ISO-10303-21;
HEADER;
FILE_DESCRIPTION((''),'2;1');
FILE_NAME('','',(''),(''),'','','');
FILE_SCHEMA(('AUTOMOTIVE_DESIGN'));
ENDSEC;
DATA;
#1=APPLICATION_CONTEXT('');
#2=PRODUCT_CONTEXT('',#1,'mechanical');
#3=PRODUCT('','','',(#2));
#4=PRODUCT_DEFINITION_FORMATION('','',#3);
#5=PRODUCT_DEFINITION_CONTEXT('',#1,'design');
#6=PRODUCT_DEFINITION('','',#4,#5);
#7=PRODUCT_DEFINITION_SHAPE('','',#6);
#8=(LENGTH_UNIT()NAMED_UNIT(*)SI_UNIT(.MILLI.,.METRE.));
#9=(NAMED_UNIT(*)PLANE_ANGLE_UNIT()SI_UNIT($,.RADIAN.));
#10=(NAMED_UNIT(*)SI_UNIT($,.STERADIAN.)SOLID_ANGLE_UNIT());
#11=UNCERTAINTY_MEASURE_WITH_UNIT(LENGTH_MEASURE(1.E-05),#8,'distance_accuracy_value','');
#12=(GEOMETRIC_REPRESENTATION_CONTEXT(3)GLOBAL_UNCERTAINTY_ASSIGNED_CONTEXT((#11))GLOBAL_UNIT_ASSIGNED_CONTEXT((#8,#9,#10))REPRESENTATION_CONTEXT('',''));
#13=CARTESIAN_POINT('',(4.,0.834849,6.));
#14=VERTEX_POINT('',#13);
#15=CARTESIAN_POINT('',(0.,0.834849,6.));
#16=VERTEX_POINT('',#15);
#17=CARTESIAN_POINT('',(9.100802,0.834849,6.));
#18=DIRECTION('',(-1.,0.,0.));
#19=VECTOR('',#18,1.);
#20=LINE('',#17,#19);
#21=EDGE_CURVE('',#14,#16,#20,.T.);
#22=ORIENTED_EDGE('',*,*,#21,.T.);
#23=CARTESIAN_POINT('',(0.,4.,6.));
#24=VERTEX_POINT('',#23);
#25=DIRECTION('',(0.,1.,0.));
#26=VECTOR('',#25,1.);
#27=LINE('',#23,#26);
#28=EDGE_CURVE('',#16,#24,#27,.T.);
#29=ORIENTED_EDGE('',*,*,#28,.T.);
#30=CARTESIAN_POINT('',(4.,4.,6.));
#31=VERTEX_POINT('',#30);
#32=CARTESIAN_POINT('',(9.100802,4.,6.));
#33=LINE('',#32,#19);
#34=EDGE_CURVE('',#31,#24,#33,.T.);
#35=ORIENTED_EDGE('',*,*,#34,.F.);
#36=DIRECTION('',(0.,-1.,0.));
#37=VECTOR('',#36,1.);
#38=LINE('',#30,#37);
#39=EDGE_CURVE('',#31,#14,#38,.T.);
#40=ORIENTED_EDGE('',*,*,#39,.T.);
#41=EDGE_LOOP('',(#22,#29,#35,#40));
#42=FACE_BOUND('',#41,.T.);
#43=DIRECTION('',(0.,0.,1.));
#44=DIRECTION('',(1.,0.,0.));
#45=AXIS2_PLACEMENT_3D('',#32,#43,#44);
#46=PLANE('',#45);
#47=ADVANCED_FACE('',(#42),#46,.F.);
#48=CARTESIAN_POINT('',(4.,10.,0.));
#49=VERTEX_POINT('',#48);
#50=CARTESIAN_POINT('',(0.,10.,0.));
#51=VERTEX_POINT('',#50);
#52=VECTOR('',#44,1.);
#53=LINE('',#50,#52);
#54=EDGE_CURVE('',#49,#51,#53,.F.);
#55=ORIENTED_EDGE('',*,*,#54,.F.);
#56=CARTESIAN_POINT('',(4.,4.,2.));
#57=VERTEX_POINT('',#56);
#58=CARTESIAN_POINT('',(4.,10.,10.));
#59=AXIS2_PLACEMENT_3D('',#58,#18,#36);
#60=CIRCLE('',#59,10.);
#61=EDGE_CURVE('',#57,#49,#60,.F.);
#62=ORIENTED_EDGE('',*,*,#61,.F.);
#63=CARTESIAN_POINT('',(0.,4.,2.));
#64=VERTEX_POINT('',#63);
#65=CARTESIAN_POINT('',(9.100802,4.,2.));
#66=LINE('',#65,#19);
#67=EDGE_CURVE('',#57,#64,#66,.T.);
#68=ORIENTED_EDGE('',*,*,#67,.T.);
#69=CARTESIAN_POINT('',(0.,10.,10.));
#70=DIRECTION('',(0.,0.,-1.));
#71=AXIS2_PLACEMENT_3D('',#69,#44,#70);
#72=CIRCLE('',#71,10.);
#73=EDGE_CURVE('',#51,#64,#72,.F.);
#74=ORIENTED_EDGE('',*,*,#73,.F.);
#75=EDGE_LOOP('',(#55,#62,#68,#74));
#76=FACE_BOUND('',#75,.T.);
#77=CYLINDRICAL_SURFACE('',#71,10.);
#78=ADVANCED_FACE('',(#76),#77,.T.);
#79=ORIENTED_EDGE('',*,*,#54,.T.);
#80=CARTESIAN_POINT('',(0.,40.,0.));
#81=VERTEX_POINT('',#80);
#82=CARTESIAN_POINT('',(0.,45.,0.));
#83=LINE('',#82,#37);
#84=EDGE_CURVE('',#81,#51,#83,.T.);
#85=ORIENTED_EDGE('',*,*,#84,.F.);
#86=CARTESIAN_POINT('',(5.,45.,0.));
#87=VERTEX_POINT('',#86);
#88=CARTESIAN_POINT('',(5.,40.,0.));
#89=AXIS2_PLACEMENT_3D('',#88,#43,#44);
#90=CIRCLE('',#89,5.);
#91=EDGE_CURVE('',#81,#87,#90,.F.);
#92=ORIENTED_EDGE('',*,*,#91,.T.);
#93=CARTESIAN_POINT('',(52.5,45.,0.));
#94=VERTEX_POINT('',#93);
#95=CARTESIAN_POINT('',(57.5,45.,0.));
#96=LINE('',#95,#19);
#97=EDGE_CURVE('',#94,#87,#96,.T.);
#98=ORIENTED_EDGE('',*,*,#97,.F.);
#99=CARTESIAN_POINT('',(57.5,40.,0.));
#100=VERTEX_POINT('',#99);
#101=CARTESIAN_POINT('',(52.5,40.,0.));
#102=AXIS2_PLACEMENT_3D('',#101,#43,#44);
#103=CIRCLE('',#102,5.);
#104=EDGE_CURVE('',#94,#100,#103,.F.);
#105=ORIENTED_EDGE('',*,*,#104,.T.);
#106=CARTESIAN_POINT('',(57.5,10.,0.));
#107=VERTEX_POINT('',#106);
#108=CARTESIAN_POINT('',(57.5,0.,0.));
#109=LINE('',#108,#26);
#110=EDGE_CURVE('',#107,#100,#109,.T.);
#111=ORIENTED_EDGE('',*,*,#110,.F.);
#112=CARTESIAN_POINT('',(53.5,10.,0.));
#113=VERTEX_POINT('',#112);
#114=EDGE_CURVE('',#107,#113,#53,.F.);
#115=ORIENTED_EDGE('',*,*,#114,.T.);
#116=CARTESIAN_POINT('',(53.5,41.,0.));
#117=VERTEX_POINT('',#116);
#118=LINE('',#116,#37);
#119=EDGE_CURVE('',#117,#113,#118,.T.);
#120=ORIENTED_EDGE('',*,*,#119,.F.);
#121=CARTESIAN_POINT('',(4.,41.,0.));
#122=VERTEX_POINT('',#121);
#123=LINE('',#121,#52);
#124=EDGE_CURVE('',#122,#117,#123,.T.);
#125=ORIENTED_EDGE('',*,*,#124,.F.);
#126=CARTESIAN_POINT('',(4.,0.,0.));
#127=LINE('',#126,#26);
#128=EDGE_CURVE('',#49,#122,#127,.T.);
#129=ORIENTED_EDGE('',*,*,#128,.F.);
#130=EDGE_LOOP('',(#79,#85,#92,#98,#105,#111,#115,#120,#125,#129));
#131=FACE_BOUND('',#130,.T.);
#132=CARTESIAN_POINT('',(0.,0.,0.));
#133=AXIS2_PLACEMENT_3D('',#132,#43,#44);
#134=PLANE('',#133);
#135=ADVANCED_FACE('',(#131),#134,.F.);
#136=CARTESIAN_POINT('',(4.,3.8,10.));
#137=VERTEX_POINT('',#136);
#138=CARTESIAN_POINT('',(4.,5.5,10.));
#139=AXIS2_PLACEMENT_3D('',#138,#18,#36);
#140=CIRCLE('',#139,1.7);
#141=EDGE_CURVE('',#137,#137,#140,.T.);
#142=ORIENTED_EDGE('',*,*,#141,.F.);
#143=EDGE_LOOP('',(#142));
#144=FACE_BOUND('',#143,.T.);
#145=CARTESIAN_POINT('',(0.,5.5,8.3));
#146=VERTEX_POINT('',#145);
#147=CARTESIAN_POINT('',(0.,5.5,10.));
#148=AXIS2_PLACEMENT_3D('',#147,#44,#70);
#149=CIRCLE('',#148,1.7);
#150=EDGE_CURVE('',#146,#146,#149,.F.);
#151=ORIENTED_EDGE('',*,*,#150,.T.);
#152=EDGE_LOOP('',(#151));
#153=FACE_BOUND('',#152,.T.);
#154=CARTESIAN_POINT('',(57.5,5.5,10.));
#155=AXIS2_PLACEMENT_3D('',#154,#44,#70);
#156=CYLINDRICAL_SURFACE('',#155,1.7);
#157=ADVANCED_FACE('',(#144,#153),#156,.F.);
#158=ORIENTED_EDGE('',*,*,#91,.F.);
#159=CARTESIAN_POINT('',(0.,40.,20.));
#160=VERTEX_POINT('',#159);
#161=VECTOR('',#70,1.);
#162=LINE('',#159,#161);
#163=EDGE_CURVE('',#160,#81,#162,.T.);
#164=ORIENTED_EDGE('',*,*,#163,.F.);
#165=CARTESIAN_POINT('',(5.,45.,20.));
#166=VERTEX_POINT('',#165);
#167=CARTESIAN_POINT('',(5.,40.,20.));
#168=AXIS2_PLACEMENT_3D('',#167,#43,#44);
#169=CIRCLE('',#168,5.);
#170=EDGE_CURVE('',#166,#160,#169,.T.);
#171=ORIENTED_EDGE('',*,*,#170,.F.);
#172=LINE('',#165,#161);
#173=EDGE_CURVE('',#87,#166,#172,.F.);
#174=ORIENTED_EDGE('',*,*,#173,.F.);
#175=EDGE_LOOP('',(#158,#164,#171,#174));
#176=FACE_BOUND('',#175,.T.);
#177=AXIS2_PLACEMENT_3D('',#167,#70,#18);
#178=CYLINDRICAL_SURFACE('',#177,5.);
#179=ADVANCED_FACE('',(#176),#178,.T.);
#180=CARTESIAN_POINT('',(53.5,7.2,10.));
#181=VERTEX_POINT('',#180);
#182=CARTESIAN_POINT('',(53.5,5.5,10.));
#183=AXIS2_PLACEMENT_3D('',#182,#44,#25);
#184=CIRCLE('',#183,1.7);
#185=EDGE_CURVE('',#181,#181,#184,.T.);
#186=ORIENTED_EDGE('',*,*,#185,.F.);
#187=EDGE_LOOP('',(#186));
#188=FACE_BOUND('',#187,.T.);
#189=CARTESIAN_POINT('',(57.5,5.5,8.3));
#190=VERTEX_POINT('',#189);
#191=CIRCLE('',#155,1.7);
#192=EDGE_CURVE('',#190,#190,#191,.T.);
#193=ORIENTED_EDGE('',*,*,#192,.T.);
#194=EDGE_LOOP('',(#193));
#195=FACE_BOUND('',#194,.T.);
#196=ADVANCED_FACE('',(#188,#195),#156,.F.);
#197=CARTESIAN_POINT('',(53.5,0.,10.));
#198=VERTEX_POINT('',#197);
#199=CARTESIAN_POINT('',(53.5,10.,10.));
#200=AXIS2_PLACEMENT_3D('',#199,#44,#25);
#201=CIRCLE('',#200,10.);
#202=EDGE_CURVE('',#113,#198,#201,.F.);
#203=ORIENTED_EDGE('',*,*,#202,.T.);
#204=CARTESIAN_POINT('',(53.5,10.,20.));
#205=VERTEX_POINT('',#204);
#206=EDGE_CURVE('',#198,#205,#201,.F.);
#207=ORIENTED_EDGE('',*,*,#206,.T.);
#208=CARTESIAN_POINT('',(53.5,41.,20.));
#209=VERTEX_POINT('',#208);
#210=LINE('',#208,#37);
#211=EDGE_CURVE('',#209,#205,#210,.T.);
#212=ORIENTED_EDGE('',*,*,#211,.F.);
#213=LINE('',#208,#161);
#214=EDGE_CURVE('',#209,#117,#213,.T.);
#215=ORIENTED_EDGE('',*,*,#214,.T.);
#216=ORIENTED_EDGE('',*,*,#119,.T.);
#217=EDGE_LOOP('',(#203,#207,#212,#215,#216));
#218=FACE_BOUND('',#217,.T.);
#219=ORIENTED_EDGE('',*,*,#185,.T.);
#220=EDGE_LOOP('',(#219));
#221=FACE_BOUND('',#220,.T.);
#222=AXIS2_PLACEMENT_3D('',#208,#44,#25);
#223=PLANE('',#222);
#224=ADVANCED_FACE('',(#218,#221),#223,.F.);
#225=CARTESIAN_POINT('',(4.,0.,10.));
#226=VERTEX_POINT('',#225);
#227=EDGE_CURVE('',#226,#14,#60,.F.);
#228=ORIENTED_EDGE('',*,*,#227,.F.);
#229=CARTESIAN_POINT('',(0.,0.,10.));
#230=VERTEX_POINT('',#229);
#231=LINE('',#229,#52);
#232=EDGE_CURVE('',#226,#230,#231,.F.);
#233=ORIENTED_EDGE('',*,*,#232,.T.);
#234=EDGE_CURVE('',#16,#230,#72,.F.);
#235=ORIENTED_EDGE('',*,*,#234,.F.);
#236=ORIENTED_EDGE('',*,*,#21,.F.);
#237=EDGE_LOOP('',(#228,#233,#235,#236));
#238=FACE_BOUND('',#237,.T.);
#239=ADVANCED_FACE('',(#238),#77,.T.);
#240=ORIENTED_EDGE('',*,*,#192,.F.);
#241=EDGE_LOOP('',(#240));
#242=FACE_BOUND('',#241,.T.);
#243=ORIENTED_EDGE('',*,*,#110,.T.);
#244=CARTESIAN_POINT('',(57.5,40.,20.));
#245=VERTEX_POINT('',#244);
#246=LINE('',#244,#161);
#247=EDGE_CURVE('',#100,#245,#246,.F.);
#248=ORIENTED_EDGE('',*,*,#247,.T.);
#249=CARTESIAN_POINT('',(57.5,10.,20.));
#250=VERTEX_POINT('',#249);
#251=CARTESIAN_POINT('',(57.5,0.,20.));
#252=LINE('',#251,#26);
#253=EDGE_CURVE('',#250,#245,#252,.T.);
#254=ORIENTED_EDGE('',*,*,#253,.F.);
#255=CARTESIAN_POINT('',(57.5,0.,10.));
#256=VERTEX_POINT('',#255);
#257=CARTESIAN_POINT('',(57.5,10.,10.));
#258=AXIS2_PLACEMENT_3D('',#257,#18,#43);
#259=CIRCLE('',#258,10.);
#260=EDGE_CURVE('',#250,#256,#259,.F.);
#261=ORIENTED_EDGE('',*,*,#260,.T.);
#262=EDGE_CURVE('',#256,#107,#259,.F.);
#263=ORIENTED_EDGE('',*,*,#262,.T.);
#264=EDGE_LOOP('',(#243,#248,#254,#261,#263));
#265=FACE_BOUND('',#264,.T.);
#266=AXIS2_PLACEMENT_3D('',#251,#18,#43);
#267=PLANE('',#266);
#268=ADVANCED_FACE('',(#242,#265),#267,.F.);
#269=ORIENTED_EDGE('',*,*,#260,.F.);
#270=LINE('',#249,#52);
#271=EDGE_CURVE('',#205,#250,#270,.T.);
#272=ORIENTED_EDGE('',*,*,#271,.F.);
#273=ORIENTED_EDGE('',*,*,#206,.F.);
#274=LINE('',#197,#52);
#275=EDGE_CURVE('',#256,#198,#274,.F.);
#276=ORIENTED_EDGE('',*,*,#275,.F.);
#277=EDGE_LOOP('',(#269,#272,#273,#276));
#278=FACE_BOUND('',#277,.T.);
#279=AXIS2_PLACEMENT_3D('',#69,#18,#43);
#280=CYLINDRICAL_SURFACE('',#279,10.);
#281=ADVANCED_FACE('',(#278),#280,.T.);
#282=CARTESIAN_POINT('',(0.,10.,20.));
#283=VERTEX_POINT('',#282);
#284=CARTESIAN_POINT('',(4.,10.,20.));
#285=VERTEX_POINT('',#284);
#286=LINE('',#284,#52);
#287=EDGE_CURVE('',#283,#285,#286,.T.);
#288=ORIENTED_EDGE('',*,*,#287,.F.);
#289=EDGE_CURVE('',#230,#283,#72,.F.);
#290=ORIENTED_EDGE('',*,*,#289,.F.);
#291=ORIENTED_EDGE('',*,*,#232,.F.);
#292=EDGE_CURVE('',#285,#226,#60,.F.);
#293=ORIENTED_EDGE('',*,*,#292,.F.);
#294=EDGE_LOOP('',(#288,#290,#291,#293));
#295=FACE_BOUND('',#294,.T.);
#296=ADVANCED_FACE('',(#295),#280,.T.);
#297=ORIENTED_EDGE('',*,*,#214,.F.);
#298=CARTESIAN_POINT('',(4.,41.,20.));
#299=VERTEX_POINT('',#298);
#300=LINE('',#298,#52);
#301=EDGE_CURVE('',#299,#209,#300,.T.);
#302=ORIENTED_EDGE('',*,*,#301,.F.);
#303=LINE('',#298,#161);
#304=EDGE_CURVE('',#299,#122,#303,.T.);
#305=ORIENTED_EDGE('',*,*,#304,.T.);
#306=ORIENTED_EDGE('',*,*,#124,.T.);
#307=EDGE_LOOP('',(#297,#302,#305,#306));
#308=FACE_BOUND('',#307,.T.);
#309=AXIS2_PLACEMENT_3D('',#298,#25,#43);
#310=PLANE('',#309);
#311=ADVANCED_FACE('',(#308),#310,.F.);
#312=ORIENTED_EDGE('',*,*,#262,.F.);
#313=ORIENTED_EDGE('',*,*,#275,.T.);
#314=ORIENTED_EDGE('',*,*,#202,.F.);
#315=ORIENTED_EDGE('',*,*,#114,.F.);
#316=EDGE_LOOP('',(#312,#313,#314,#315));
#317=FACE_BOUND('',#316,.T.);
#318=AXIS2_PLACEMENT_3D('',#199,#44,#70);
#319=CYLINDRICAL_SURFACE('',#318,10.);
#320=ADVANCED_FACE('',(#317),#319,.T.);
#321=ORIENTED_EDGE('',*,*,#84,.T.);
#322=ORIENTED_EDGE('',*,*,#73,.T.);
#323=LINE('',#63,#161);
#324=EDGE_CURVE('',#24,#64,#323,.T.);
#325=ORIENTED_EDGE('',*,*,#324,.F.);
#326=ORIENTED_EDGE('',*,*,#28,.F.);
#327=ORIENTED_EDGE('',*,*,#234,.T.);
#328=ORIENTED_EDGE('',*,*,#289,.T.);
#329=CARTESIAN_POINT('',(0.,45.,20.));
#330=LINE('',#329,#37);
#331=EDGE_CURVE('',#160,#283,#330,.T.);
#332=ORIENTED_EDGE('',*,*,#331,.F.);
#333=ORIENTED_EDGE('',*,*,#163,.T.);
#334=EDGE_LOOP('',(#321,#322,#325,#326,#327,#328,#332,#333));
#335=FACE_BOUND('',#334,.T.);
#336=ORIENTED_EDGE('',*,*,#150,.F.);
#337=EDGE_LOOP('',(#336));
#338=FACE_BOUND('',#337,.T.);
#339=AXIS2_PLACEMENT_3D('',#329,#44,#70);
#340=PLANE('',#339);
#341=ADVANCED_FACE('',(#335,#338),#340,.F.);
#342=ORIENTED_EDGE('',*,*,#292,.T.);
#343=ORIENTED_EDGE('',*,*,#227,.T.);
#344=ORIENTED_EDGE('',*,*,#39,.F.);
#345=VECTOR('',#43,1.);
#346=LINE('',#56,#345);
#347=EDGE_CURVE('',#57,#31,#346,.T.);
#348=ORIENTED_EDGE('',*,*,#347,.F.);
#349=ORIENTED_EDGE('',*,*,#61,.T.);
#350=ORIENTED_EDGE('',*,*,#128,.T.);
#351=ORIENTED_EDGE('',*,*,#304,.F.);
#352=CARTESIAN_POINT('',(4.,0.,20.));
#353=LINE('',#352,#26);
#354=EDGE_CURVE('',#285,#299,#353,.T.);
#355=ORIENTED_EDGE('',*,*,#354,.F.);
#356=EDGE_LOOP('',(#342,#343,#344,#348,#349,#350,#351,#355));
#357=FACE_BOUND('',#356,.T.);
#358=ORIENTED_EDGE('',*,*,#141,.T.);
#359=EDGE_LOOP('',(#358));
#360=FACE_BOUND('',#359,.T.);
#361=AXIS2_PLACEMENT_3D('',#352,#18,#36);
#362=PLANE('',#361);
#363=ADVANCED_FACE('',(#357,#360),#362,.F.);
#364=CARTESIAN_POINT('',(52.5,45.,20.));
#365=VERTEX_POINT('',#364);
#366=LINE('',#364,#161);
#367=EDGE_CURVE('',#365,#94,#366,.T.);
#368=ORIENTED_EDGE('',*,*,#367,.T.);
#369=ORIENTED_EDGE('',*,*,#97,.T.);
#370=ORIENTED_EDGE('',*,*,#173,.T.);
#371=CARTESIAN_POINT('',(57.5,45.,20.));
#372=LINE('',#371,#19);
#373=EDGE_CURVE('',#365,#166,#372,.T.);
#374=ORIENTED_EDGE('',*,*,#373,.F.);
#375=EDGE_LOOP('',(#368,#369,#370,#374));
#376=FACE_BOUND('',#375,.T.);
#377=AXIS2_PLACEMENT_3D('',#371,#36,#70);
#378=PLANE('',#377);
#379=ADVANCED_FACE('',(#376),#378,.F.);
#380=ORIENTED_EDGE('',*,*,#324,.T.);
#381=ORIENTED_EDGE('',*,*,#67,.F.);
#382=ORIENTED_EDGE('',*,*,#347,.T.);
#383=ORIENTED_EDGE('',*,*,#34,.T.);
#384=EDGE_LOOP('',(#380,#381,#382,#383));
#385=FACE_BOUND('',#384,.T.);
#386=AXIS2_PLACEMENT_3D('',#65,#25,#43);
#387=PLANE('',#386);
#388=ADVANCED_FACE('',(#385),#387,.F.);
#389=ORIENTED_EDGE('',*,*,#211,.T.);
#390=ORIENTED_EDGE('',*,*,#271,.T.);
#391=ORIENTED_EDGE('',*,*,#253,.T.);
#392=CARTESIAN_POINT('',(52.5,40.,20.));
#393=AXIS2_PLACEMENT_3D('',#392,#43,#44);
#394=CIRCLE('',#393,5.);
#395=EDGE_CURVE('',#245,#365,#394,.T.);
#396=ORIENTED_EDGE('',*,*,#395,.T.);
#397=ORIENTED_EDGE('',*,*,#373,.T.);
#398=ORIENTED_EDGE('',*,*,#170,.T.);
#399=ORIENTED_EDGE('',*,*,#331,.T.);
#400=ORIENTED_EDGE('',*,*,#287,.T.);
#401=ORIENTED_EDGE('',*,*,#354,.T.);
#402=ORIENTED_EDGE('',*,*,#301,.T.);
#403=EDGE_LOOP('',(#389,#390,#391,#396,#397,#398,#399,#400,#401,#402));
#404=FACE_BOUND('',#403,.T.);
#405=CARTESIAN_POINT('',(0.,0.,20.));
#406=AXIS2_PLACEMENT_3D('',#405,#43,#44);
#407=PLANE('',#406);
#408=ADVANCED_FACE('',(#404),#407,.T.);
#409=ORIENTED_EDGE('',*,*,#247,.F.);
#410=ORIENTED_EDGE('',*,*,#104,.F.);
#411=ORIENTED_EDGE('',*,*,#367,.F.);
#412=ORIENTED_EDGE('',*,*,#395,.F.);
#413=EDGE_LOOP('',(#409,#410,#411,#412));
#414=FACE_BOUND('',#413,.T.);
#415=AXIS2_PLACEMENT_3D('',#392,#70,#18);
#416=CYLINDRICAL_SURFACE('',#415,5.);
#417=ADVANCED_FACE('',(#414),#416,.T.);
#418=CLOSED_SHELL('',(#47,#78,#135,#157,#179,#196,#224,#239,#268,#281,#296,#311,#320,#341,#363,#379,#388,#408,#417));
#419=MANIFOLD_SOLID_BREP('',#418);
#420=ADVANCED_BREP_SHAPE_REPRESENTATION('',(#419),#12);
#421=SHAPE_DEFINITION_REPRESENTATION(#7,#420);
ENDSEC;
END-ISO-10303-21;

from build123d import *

# Parameters (mm, degrees)
BOSS_EXTRU_1_DEPTH          = 20
ENL_V_MAT_EXTRU_1_REACH     = 77.705
ESQUISSE2_R                 = 1.5
D_GAGEMENT_M31_D            = 3.4
D_GAGEMENT_M31_DEPTH        = 57.5
D_GAGEMENT_M31_TIP          = 1.021463052
CONG_1_R                    = 10
CONG_2_R                    = 5
ENL_V_START                 = 0.83484861
ENL_V_MAT_EXTRU_2_OUTLINE_W = 4
ENL_V_MAT_EXTRU_2_OUTLINE_H = 5
ENL_V_MAT_EXTRU_2_DEPTH     = 3.16515139


# Read off the part's stored shape, not the designer's step: Enlèv. mat.-Extru.2
with BuildPart() as part:
    # Esquisse1 → Boss.-Extru.1 (new body)
    with BuildSketch(Plane.XY):
        Polygon((0, 0), (4, 0), (4, 41), (53.5, 41), (53.5, 0), (57.5, 0), (57.5, 45), (0, 45), align=None)
    extrude(amount=BOSS_EXTRU_1_DEPTH)

    # Enlèv. mat.-Extru.1: up to this face of the body (flat: up to its plane)
    enl_v_mat_extru_1_end = Plane(part.part.faces().sort_by_distance((0, 22.5, 10))[0])
    # Esquisse2 → Enlèv. mat.-Extru.1 (cut, up to the picked face)
    with BuildSketch(Plane(origin=(57.5, 0, 0), x_dir=(0, 0, -1), z_dir=(1, 0, 0)), mode=Mode.PRIVATE) as enl_v_mat_extru_1_sk1:
        with Locations((-10, 5.5)):
            Circle(ESQUISSE2_R)
    enl_v_mat_extru_1_tool1 = split(extrude(enl_v_mat_extru_1_sk1.sketch, amount=-ENL_V_MAT_EXTRU_1_REACH, mode=Mode.PRIVATE), bisect_by=enl_v_mat_extru_1_end, keep=Keep.BOTH, mode=Mode.PRIVATE)
    add(enl_v_mat_extru_1_tool1.solids().sort_by(Axis((57.5, 5.5, 10), (-1, 0, 0)))[0], mode=Mode.SUBTRACT)

    # Dégagement M31
    with Locations(Plane(origin=(57.5, 0, 0), x_dir=(0, 0, -1), z_dir=(1, 0, 0))):
        with Locations((-10, 5.5)):
            Hole(D_GAGEMENT_M31_D / 2, depth=D_GAGEMENT_M31_DEPTH)
            with Locations((0, 0, -(D_GAGEMENT_M31_DEPTH + D_GAGEMENT_M31_TIP / 2))):  # 118° drill point
                Cone(0, D_GAGEMENT_M31_D / 2, D_GAGEMENT_M31_TIP, mode=Mode.SUBTRACT)

    # Congé1
    cong_1_edges = [part.edges().sort_by_distance(p)[0] for p in [
        (55.5, 0, 0),
        (55.5, 0, 20),
        (2, 0, 0),
        (2, 0, 20),
    ]]
    fillet(cong_1_edges, radius=CONG_1_R - 0.0001)  # a hair under: the kernel refuses the full size

    # Congé2
    cong_2_edges = [part.edges().sort_by_distance(p)[0] for p in [
        (0, 45, 10),
        (57.5, 45, 10),
    ]]
    fillet(cong_2_edges, radius=CONG_2_R)

    # Enlèv. mat.-Extru.2 outline → Enlèv. mat.-Extru.2 (cut)
    with BuildSketch(Plane(origin=(0, 0, 0), x_dir=(1, 0, 0), z_dir=(0, 1, 0)).offset(ENL_V_START)):
        with Locations((2, -3.5)):
            Rectangle(ENL_V_MAT_EXTRU_2_OUTLINE_W, ENL_V_MAT_EXTRU_2_OUTLINE_H)
    extrude(amount=ENL_V_MAT_EXTRU_2_DEPTH, mode=Mode.SUBTRACT)


solid = part.part
